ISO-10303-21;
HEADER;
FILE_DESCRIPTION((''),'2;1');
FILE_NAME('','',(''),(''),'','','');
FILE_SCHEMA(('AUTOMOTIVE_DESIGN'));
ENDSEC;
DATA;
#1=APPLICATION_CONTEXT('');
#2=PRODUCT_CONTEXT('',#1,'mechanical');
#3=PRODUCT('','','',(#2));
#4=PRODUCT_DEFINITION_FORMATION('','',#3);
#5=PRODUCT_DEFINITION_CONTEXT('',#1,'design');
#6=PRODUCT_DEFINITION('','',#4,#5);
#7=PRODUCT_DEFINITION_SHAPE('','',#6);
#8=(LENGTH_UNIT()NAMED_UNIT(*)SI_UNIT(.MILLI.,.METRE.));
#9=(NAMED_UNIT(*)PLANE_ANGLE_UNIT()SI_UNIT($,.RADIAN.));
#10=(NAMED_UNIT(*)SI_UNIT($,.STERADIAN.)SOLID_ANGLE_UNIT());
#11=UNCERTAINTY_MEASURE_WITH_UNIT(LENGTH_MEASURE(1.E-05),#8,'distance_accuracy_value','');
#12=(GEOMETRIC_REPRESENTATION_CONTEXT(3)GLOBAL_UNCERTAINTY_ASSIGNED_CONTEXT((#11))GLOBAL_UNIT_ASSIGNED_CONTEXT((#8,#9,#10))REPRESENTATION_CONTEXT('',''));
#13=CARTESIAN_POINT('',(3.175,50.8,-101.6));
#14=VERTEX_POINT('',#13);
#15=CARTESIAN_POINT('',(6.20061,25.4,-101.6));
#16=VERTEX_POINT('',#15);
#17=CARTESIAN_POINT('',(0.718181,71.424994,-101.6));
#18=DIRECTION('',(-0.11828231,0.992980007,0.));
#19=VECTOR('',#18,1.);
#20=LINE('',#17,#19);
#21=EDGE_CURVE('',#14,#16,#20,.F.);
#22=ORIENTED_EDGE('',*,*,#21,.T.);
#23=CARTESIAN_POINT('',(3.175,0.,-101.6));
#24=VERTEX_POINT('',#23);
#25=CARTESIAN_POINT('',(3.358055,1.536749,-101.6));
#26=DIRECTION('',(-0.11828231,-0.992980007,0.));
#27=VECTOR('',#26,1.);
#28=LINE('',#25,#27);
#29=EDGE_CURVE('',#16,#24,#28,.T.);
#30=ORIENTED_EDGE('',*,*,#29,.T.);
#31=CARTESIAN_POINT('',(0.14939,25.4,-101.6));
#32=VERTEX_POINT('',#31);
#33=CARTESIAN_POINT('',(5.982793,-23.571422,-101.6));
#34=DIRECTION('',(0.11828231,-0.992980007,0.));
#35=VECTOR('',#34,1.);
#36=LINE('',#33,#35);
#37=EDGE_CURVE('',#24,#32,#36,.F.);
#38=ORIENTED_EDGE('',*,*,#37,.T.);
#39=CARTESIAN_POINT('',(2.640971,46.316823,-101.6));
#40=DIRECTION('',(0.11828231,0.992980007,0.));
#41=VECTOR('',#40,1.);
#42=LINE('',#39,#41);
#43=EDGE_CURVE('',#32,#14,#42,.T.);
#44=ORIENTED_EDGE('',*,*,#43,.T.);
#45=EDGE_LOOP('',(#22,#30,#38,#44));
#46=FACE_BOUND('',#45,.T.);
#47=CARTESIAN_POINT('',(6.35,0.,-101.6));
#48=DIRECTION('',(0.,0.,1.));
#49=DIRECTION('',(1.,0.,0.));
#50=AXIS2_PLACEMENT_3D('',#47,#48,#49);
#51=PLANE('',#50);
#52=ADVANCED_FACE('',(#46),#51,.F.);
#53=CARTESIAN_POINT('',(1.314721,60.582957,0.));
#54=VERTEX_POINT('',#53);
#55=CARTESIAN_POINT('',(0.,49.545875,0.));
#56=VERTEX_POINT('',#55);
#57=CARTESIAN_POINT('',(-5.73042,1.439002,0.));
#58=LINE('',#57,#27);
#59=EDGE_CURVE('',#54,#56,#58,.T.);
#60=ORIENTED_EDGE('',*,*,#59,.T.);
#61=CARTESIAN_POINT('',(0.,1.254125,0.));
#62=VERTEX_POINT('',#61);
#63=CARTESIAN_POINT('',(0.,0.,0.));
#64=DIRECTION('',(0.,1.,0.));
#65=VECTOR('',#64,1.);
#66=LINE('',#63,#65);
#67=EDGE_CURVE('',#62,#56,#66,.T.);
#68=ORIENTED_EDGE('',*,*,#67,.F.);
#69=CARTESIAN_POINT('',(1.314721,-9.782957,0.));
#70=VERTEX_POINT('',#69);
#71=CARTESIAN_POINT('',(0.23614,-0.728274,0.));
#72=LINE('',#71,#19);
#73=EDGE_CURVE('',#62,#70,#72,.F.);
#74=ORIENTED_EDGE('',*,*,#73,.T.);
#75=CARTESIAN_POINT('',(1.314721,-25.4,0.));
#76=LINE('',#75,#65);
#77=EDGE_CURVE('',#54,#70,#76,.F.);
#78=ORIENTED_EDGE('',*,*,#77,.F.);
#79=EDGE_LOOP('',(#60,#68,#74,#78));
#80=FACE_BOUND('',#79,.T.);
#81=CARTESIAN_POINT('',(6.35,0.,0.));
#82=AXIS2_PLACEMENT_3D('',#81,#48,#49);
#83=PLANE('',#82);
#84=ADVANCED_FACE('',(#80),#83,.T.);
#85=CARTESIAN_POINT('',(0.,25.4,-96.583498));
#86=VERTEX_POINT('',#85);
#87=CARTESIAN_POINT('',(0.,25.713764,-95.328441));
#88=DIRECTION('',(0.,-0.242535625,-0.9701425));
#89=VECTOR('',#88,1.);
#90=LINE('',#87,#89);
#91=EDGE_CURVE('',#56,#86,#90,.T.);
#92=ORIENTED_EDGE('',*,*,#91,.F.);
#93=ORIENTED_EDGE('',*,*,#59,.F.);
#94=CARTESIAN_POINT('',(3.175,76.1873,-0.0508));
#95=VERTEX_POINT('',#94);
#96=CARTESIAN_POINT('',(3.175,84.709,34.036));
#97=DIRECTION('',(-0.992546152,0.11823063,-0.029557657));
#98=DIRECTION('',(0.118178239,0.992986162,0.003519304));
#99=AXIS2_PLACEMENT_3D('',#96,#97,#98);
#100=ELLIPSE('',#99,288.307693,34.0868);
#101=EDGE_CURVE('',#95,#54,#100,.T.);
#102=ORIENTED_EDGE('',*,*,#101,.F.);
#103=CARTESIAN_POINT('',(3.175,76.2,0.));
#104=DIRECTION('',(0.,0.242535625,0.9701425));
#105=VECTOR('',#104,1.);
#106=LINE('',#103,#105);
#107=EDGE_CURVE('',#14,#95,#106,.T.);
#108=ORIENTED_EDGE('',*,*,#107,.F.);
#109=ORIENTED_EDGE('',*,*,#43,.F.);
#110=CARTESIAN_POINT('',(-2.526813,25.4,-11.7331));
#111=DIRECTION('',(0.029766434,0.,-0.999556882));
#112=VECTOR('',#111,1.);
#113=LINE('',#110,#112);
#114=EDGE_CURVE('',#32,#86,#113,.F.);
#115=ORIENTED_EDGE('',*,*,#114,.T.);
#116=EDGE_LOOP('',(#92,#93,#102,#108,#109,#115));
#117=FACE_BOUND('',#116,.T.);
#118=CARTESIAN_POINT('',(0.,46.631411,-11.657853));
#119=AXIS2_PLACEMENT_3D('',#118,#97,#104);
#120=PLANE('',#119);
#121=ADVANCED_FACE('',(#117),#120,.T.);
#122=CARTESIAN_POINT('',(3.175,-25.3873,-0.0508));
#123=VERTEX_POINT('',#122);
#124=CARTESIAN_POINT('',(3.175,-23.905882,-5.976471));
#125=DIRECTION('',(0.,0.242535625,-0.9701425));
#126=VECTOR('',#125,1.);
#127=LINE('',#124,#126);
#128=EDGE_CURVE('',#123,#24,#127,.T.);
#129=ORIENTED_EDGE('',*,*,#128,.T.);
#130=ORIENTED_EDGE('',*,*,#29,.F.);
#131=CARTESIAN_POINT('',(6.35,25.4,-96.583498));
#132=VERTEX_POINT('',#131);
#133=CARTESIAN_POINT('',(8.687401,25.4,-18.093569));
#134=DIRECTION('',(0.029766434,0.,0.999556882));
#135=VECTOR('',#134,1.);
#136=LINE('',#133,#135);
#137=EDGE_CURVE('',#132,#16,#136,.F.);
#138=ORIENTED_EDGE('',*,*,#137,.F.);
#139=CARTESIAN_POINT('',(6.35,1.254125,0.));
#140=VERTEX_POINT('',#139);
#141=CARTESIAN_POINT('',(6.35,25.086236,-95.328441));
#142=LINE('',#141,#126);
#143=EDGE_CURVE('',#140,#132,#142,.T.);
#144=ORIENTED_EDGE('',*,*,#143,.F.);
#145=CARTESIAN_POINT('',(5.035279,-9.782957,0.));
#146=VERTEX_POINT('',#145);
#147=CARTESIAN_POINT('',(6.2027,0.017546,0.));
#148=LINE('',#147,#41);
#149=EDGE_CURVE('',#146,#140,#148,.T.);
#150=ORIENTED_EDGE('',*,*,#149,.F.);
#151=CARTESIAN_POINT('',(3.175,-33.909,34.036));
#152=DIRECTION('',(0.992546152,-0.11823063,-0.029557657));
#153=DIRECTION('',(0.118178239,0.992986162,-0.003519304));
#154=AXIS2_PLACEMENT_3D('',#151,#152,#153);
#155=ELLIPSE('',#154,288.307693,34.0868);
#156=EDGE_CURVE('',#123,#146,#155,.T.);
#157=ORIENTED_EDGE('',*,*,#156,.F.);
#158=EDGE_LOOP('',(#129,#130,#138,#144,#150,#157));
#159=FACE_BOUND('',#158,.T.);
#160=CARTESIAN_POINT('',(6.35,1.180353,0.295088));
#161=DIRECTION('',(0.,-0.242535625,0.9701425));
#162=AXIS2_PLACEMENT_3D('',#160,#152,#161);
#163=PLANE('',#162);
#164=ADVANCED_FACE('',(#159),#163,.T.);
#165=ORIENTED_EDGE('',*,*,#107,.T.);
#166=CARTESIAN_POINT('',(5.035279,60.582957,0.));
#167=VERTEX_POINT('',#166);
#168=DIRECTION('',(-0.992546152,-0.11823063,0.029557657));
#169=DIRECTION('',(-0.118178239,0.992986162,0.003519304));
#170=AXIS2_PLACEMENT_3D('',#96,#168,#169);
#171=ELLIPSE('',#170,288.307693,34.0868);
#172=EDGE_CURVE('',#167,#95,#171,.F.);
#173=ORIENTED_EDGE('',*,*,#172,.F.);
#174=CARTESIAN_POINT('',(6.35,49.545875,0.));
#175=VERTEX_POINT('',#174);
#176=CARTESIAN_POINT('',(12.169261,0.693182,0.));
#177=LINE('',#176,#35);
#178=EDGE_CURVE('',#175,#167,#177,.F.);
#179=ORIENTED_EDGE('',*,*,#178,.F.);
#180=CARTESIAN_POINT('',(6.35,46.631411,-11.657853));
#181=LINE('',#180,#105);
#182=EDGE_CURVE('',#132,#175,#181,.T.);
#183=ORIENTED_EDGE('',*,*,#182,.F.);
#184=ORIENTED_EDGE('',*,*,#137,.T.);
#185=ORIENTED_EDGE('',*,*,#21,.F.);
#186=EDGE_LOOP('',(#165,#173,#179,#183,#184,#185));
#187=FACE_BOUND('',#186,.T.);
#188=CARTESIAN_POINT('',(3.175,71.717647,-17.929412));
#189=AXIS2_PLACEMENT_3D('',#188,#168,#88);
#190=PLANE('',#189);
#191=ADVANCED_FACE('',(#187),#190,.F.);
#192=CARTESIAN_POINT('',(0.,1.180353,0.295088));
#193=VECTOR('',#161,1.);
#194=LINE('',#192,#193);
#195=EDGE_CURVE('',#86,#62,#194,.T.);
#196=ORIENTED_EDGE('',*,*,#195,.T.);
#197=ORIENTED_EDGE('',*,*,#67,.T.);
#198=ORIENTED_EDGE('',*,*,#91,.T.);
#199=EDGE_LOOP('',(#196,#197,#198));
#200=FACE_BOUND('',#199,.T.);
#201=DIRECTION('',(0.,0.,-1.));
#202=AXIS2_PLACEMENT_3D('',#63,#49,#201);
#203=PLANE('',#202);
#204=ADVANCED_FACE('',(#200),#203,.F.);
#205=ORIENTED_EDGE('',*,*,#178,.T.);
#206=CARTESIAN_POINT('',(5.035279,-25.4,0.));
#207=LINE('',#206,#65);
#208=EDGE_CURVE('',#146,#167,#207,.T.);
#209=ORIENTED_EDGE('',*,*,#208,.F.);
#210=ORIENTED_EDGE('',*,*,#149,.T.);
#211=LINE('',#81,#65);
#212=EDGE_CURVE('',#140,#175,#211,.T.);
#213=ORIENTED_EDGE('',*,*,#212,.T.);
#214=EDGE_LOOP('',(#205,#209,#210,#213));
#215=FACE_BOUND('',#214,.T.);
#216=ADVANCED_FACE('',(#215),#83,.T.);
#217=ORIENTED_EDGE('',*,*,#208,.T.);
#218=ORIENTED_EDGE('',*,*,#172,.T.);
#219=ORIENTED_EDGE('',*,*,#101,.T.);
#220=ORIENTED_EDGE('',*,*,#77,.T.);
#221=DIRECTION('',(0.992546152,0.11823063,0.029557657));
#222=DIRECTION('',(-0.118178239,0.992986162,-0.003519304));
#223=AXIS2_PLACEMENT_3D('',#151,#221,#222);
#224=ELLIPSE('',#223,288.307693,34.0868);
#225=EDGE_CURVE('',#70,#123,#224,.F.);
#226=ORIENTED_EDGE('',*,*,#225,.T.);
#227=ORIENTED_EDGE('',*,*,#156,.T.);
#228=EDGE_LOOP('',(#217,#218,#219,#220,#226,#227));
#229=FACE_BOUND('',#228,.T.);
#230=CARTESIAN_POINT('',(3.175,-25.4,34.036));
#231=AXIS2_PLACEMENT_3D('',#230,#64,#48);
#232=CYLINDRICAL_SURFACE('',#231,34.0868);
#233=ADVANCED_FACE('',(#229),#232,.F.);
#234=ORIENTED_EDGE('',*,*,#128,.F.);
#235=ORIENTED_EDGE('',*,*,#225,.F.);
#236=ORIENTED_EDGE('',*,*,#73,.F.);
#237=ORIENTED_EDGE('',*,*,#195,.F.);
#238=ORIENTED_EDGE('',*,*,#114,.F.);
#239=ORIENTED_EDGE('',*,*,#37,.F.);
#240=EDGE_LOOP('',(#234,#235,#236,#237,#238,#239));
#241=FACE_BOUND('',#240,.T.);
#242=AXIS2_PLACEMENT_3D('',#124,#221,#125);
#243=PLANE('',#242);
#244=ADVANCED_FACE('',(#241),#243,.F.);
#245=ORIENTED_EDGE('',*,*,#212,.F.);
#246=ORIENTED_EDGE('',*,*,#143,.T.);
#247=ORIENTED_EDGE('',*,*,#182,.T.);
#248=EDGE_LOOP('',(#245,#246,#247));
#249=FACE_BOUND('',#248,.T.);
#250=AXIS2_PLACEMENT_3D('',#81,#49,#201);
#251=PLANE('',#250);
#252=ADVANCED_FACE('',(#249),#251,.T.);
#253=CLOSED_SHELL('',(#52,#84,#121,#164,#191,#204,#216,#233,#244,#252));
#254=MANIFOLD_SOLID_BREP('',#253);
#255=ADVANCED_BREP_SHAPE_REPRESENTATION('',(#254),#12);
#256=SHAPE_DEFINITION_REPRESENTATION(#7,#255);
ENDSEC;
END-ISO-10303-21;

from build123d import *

# Parameters (mm, degrees)
SKETCH1_W               = 101.6
SKETCH1_H               = 50.8
BOSS_EXTRUDE1_DEPTH     = 6.35
CHAMFER1_SIZE           = 3.175
CHAMFER1_SIZE2          = 25.858299909
CHAMFER2_SIZE           = 3.175
CHAMFER2_SIZE_2         = 25.858299909
CHAMFER3_SIZE           = 3.175
CHAMFER3_SIZE2          = 25.858299909
CHAMFER4_SIZE           = 3.175
CHAMFER4_SIZE_2         = 25.858299909
CUT_EXTRUDE1_DEPTH      = 76.2
CUT_EXTRUDE1_DEPTH_BACK = 25.4


with BuildPart() as part:
    # Sketch1 → Boss-Extrude1 (new body)
    with BuildSketch(Plane(origin=(0, 0, 0), x_dir=(0, 0, -1), z_dir=(1, 0, 0))):
        with Locations((50.8, 25.4)):
            Rectangle(SKETCH1_W, SKETCH1_H)
        Polygon((0, 76.2), (101.6, 50.8), (0, 50.8), align=None)
        Polygon((0, 0), (0, -25.4), (101.6, 0), align=None)
    extrude(amount=BOSS_EXTRUDE1_DEPTH)

    # Chamfer1
    chamfer1_edges = [part.edges().sort_by_distance(p)[0] for p in [
        (0, 63.5, -50.8),
    ]]
    chamfer1_side = [part.faces().sort_by_distance(p)[0] for p in [
        (3.175, 63.5, -50.8),
    ]]
    chamfer(chamfer1_edges, length=CHAMFER1_SIZE, length2=CHAMFER1_SIZE2, reference=chamfer1_side[0])

    # Chamfer2
    # the kernel refuses this chamfer: 25.858299909, 3.175 mm, written as the material it takes off along each edge
    with BuildSketch(Plane(origin=(6.35, 92.501557672, 65.20623069), x_dir=(-0.954887306003921, 0.28810166968922074, -0.07202541742230516), z_dir=(0, -0.24253562503633294, -0.970142500145332))) as chamfer2_piece_1:
        Polygon((CHAMFER2_SIZE * 0.954887306004, -CHAMFER2_SIZE * 0.296968403761), (-CHAMFER2_SIZE_2 * 0.296968403759, -CHAMFER2_SIZE_2 * 0.954887305997), (0, 0), align=None)
    extrude(amount=239.152971182, mode=Mode.SUBTRACT)

    # Chamfer3
    chamfer3_edges = [part.edges().sort_by_distance(p)[0] for p in [
        (0, -12.7, -50.8),
    ]]
    chamfer3_side = [part.faces().sort_by_distance(p)[0] for p in [
        (3.175, -12.7, -50.8),
    ]]
    chamfer(chamfer3_edges, length=CHAMFER3_SIZE, length2=CHAMFER3_SIZE2, reference=chamfer3_side[0])

    # Chamfer4
    # the kernel refuses this chamfer: 25.858299909, 3.175 mm, written as the material it takes off along each edge
    with BuildSketch(Plane(origin=(6.35, -41.701557672, 65.20623069), x_dir=(-0.9548873060039216, -0.2881016696892189, -0.07202541742230473), z_dir=(0, 0.24253562503633297, -0.9701425001453319))) as chamfer4_piece_1:
        Polygon((CHAMFER4_SIZE * 0.954887306004, CHAMFER4_SIZE * 0.296968403761), (-CHAMFER4_SIZE_2 * 0.296968403759, CHAMFER4_SIZE_2 * 0.954887305997), (0, 0), align=None)
    extrude(amount=239.152971182, mode=Mode.SUBTRACT)

    # Sketch2 → Cut-Extrude1 (cut, two sides: drawn at the far end of the back side and taken through both)
    with BuildSketch(Plane(origin=(0, 0, 0), x_dir=(1, 0, 0), z_dir=(0, 1, 0)).offset(-CUT_EXTRUDE1_DEPTH_BACK)):
        with BuildLine():
            Line((3.175, -34.036), (-2.377874902, -0.404533862))
            ThreePointArc((-2.377874902, -0.404533862), (3.986335677, 0.041142906), (10.322125098, -0.706905547))
            Line((10.322125098, -0.706905547), (3.175, -34.036))
        make_face()
    extrude(amount=CUT_EXTRUDE1_DEPTH + CUT_EXTRUDE1_DEPTH_BACK, mode=Mode.SUBTRACT)


solid = part.part
